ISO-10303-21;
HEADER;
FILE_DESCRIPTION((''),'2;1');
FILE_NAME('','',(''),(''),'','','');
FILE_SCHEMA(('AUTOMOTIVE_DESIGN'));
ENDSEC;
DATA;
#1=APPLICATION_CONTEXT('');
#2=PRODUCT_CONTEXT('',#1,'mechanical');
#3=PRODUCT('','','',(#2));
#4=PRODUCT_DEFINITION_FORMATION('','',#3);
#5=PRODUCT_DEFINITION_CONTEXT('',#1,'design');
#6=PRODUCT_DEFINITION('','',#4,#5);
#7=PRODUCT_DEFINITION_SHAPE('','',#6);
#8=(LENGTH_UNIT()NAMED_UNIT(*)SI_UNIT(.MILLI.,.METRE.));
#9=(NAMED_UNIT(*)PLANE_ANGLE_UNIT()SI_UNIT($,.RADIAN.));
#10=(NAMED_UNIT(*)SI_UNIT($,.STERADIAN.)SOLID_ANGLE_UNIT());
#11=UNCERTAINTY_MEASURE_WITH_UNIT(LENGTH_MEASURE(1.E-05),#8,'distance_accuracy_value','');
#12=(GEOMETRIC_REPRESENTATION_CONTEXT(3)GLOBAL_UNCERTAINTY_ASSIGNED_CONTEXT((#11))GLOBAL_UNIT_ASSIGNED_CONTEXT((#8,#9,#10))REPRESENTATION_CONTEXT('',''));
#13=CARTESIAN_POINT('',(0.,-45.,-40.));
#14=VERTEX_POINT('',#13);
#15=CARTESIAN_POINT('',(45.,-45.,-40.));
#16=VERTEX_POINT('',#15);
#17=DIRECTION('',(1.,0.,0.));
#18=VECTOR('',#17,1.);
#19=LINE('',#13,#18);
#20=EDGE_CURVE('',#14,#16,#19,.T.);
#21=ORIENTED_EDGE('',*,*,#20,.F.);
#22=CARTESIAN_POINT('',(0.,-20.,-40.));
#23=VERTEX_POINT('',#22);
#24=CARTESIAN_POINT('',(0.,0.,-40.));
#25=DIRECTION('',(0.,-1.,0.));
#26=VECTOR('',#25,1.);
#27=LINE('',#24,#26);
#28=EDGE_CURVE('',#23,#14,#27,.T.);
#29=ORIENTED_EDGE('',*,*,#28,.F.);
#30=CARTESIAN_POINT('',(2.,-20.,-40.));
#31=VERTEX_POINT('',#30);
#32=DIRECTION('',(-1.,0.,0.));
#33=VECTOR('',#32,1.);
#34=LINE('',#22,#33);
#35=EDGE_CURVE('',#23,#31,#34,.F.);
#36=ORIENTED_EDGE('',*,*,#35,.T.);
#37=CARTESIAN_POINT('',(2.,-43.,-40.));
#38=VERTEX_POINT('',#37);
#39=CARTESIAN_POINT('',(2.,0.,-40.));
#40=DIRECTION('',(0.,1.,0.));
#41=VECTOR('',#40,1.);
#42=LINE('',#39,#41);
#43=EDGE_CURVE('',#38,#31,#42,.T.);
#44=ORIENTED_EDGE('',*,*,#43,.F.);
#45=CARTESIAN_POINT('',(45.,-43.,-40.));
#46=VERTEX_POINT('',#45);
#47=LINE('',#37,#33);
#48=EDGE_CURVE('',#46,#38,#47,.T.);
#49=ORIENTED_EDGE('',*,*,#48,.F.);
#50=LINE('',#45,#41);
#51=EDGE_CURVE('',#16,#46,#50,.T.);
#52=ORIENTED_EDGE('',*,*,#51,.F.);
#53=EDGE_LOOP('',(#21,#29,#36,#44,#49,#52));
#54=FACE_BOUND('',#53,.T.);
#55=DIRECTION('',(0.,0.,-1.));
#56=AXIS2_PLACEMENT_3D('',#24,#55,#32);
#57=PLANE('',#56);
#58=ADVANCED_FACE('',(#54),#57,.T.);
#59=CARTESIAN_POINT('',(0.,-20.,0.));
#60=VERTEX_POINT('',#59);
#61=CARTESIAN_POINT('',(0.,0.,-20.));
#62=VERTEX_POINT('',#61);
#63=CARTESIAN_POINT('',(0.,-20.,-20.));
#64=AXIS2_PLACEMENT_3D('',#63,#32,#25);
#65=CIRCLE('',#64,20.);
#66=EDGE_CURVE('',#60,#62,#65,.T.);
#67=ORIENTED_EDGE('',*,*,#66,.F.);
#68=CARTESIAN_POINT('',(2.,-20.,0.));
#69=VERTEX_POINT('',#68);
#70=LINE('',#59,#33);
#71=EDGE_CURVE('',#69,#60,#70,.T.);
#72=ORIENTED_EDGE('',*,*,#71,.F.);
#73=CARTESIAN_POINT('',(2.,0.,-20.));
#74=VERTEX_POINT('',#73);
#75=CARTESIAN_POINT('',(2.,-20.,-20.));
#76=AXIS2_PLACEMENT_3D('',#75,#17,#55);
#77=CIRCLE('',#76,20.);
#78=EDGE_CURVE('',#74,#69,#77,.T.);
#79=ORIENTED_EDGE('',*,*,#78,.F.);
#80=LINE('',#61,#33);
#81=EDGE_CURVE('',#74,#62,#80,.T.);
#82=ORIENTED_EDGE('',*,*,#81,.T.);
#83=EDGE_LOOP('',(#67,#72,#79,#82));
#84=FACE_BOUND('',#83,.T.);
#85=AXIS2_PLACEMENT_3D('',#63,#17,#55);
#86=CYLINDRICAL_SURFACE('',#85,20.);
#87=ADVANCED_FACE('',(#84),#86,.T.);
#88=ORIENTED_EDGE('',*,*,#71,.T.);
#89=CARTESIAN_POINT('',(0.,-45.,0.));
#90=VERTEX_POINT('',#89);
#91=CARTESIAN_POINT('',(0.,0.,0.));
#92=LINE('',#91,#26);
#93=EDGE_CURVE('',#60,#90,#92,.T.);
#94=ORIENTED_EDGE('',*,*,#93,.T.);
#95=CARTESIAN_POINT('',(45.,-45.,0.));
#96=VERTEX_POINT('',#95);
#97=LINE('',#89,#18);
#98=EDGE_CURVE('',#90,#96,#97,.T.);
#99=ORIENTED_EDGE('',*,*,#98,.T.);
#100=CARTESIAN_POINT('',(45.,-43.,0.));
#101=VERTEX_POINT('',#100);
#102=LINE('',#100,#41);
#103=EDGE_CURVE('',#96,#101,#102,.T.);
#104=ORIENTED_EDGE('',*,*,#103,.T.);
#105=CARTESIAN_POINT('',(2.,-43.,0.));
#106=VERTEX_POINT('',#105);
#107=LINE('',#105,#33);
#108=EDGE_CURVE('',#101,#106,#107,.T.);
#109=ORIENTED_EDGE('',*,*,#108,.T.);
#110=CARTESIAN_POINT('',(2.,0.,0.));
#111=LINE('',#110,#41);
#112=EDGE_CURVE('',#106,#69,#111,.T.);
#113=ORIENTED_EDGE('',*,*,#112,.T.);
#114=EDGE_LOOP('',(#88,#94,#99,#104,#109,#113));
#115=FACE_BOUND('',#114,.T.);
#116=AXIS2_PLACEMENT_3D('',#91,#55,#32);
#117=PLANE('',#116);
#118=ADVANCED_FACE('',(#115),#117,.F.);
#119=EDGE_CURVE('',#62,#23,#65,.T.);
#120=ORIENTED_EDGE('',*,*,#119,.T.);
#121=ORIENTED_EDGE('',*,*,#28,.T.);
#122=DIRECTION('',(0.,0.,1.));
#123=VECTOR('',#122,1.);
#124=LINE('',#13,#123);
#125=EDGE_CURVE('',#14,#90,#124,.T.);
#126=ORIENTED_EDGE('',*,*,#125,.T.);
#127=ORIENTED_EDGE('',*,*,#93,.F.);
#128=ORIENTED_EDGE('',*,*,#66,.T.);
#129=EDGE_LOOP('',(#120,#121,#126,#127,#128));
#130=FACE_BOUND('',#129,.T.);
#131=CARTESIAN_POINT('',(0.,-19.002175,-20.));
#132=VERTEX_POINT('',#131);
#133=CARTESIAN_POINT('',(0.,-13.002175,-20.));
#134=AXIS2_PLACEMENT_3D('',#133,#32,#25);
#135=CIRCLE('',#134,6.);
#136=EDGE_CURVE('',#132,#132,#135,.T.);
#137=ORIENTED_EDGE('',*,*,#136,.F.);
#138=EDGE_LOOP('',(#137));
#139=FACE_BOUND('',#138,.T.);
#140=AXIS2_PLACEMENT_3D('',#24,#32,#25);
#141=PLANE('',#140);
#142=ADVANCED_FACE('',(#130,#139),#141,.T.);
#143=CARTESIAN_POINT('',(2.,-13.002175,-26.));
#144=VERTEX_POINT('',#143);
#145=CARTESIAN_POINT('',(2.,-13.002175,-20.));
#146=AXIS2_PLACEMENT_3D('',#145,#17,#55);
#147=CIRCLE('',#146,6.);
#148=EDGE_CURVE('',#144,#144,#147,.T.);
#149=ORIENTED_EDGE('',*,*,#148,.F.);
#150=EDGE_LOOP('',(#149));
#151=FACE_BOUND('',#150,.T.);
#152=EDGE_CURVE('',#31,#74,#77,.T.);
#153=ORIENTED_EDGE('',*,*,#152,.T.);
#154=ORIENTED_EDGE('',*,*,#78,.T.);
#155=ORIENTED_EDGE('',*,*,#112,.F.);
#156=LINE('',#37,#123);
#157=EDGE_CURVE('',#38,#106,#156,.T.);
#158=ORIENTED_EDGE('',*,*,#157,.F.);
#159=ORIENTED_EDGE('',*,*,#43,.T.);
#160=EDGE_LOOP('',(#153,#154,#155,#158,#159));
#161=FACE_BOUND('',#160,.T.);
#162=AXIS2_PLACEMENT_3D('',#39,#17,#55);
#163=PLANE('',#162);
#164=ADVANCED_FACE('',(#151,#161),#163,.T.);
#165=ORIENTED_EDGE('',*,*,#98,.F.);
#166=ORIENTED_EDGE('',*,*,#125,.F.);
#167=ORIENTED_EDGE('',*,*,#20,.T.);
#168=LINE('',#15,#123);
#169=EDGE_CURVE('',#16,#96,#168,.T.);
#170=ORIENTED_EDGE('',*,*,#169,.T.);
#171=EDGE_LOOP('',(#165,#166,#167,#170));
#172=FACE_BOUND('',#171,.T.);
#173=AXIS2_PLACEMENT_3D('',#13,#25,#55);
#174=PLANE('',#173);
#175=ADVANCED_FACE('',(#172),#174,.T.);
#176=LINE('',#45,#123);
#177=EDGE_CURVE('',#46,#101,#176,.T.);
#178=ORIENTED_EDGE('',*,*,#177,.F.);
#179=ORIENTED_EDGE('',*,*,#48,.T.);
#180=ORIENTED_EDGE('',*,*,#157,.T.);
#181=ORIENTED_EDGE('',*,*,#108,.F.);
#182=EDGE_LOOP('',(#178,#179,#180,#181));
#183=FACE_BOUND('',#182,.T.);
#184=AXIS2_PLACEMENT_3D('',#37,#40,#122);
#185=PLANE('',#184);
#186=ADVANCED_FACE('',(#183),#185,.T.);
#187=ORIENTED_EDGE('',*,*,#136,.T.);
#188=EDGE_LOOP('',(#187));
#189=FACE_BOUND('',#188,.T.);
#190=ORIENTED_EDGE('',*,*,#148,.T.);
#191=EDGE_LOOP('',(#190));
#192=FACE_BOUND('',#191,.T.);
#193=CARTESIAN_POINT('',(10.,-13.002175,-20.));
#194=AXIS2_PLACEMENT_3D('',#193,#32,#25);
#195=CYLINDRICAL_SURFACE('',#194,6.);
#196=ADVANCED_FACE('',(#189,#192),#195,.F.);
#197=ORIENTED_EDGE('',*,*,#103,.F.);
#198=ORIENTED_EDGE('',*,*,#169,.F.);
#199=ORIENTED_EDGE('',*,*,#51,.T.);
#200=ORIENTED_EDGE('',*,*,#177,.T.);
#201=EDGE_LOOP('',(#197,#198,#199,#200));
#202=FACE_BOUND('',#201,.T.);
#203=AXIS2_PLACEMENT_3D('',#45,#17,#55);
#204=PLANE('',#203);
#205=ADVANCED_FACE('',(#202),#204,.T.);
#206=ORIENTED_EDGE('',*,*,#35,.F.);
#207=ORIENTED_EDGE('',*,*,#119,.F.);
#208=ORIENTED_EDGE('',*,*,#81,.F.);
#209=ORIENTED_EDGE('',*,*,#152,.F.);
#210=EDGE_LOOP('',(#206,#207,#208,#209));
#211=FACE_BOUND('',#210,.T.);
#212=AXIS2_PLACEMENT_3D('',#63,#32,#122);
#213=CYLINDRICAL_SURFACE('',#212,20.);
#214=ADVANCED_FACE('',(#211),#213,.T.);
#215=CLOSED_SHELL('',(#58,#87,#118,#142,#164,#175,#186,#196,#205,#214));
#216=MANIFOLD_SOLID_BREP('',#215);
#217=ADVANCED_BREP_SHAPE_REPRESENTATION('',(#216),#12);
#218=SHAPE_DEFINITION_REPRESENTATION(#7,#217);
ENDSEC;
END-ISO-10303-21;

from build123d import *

# Parameters (mm, degrees)
BOSS_EXTRUDE1_DEPTH = 40
FILLET1_R           = 20
FILLET2_R           = 20
SKETCH2_R           = 6
CUT_EXTRUDE1_DEPTH  = 10


with BuildPart() as part:
    # Sketch1 → Boss-Extrude1 (new body)
    with BuildSketch(Plane.XY):
        Polygon((0, 0), (0, -45), (45, -45), (45, -43), (2, -43), (2, 0), align=None)
    extrude(amount=-BOSS_EXTRUDE1_DEPTH)

    # Fillet1
    fillet1_edges = [part.edges().sort_by_distance(p)[0] for p in [
        (1, 0, -40),
    ]]
    fillet(fillet1_edges, radius=FILLET1_R)

    # Fillet2
    fillet2_edges = [part.edges().sort_by_distance(p)[0] for p in [
        (1, 0, 0),
    ]]
    fillet(fillet2_edges, radius=FILLET2_R - 0.0001)  # a hair under: the kernel refuses the full size

    # Sketch2 → Cut-Extrude1 (cut)
    with BuildSketch(Plane.ZY):
        with Locations(Location((-20, -13.002174514, 0), (0, 0, 270))):
            Circle(SKETCH2_R)
    extrude(amount=-CUT_EXTRUDE1_DEPTH, mode=Mode.SUBTRACT)


solid = part.part
